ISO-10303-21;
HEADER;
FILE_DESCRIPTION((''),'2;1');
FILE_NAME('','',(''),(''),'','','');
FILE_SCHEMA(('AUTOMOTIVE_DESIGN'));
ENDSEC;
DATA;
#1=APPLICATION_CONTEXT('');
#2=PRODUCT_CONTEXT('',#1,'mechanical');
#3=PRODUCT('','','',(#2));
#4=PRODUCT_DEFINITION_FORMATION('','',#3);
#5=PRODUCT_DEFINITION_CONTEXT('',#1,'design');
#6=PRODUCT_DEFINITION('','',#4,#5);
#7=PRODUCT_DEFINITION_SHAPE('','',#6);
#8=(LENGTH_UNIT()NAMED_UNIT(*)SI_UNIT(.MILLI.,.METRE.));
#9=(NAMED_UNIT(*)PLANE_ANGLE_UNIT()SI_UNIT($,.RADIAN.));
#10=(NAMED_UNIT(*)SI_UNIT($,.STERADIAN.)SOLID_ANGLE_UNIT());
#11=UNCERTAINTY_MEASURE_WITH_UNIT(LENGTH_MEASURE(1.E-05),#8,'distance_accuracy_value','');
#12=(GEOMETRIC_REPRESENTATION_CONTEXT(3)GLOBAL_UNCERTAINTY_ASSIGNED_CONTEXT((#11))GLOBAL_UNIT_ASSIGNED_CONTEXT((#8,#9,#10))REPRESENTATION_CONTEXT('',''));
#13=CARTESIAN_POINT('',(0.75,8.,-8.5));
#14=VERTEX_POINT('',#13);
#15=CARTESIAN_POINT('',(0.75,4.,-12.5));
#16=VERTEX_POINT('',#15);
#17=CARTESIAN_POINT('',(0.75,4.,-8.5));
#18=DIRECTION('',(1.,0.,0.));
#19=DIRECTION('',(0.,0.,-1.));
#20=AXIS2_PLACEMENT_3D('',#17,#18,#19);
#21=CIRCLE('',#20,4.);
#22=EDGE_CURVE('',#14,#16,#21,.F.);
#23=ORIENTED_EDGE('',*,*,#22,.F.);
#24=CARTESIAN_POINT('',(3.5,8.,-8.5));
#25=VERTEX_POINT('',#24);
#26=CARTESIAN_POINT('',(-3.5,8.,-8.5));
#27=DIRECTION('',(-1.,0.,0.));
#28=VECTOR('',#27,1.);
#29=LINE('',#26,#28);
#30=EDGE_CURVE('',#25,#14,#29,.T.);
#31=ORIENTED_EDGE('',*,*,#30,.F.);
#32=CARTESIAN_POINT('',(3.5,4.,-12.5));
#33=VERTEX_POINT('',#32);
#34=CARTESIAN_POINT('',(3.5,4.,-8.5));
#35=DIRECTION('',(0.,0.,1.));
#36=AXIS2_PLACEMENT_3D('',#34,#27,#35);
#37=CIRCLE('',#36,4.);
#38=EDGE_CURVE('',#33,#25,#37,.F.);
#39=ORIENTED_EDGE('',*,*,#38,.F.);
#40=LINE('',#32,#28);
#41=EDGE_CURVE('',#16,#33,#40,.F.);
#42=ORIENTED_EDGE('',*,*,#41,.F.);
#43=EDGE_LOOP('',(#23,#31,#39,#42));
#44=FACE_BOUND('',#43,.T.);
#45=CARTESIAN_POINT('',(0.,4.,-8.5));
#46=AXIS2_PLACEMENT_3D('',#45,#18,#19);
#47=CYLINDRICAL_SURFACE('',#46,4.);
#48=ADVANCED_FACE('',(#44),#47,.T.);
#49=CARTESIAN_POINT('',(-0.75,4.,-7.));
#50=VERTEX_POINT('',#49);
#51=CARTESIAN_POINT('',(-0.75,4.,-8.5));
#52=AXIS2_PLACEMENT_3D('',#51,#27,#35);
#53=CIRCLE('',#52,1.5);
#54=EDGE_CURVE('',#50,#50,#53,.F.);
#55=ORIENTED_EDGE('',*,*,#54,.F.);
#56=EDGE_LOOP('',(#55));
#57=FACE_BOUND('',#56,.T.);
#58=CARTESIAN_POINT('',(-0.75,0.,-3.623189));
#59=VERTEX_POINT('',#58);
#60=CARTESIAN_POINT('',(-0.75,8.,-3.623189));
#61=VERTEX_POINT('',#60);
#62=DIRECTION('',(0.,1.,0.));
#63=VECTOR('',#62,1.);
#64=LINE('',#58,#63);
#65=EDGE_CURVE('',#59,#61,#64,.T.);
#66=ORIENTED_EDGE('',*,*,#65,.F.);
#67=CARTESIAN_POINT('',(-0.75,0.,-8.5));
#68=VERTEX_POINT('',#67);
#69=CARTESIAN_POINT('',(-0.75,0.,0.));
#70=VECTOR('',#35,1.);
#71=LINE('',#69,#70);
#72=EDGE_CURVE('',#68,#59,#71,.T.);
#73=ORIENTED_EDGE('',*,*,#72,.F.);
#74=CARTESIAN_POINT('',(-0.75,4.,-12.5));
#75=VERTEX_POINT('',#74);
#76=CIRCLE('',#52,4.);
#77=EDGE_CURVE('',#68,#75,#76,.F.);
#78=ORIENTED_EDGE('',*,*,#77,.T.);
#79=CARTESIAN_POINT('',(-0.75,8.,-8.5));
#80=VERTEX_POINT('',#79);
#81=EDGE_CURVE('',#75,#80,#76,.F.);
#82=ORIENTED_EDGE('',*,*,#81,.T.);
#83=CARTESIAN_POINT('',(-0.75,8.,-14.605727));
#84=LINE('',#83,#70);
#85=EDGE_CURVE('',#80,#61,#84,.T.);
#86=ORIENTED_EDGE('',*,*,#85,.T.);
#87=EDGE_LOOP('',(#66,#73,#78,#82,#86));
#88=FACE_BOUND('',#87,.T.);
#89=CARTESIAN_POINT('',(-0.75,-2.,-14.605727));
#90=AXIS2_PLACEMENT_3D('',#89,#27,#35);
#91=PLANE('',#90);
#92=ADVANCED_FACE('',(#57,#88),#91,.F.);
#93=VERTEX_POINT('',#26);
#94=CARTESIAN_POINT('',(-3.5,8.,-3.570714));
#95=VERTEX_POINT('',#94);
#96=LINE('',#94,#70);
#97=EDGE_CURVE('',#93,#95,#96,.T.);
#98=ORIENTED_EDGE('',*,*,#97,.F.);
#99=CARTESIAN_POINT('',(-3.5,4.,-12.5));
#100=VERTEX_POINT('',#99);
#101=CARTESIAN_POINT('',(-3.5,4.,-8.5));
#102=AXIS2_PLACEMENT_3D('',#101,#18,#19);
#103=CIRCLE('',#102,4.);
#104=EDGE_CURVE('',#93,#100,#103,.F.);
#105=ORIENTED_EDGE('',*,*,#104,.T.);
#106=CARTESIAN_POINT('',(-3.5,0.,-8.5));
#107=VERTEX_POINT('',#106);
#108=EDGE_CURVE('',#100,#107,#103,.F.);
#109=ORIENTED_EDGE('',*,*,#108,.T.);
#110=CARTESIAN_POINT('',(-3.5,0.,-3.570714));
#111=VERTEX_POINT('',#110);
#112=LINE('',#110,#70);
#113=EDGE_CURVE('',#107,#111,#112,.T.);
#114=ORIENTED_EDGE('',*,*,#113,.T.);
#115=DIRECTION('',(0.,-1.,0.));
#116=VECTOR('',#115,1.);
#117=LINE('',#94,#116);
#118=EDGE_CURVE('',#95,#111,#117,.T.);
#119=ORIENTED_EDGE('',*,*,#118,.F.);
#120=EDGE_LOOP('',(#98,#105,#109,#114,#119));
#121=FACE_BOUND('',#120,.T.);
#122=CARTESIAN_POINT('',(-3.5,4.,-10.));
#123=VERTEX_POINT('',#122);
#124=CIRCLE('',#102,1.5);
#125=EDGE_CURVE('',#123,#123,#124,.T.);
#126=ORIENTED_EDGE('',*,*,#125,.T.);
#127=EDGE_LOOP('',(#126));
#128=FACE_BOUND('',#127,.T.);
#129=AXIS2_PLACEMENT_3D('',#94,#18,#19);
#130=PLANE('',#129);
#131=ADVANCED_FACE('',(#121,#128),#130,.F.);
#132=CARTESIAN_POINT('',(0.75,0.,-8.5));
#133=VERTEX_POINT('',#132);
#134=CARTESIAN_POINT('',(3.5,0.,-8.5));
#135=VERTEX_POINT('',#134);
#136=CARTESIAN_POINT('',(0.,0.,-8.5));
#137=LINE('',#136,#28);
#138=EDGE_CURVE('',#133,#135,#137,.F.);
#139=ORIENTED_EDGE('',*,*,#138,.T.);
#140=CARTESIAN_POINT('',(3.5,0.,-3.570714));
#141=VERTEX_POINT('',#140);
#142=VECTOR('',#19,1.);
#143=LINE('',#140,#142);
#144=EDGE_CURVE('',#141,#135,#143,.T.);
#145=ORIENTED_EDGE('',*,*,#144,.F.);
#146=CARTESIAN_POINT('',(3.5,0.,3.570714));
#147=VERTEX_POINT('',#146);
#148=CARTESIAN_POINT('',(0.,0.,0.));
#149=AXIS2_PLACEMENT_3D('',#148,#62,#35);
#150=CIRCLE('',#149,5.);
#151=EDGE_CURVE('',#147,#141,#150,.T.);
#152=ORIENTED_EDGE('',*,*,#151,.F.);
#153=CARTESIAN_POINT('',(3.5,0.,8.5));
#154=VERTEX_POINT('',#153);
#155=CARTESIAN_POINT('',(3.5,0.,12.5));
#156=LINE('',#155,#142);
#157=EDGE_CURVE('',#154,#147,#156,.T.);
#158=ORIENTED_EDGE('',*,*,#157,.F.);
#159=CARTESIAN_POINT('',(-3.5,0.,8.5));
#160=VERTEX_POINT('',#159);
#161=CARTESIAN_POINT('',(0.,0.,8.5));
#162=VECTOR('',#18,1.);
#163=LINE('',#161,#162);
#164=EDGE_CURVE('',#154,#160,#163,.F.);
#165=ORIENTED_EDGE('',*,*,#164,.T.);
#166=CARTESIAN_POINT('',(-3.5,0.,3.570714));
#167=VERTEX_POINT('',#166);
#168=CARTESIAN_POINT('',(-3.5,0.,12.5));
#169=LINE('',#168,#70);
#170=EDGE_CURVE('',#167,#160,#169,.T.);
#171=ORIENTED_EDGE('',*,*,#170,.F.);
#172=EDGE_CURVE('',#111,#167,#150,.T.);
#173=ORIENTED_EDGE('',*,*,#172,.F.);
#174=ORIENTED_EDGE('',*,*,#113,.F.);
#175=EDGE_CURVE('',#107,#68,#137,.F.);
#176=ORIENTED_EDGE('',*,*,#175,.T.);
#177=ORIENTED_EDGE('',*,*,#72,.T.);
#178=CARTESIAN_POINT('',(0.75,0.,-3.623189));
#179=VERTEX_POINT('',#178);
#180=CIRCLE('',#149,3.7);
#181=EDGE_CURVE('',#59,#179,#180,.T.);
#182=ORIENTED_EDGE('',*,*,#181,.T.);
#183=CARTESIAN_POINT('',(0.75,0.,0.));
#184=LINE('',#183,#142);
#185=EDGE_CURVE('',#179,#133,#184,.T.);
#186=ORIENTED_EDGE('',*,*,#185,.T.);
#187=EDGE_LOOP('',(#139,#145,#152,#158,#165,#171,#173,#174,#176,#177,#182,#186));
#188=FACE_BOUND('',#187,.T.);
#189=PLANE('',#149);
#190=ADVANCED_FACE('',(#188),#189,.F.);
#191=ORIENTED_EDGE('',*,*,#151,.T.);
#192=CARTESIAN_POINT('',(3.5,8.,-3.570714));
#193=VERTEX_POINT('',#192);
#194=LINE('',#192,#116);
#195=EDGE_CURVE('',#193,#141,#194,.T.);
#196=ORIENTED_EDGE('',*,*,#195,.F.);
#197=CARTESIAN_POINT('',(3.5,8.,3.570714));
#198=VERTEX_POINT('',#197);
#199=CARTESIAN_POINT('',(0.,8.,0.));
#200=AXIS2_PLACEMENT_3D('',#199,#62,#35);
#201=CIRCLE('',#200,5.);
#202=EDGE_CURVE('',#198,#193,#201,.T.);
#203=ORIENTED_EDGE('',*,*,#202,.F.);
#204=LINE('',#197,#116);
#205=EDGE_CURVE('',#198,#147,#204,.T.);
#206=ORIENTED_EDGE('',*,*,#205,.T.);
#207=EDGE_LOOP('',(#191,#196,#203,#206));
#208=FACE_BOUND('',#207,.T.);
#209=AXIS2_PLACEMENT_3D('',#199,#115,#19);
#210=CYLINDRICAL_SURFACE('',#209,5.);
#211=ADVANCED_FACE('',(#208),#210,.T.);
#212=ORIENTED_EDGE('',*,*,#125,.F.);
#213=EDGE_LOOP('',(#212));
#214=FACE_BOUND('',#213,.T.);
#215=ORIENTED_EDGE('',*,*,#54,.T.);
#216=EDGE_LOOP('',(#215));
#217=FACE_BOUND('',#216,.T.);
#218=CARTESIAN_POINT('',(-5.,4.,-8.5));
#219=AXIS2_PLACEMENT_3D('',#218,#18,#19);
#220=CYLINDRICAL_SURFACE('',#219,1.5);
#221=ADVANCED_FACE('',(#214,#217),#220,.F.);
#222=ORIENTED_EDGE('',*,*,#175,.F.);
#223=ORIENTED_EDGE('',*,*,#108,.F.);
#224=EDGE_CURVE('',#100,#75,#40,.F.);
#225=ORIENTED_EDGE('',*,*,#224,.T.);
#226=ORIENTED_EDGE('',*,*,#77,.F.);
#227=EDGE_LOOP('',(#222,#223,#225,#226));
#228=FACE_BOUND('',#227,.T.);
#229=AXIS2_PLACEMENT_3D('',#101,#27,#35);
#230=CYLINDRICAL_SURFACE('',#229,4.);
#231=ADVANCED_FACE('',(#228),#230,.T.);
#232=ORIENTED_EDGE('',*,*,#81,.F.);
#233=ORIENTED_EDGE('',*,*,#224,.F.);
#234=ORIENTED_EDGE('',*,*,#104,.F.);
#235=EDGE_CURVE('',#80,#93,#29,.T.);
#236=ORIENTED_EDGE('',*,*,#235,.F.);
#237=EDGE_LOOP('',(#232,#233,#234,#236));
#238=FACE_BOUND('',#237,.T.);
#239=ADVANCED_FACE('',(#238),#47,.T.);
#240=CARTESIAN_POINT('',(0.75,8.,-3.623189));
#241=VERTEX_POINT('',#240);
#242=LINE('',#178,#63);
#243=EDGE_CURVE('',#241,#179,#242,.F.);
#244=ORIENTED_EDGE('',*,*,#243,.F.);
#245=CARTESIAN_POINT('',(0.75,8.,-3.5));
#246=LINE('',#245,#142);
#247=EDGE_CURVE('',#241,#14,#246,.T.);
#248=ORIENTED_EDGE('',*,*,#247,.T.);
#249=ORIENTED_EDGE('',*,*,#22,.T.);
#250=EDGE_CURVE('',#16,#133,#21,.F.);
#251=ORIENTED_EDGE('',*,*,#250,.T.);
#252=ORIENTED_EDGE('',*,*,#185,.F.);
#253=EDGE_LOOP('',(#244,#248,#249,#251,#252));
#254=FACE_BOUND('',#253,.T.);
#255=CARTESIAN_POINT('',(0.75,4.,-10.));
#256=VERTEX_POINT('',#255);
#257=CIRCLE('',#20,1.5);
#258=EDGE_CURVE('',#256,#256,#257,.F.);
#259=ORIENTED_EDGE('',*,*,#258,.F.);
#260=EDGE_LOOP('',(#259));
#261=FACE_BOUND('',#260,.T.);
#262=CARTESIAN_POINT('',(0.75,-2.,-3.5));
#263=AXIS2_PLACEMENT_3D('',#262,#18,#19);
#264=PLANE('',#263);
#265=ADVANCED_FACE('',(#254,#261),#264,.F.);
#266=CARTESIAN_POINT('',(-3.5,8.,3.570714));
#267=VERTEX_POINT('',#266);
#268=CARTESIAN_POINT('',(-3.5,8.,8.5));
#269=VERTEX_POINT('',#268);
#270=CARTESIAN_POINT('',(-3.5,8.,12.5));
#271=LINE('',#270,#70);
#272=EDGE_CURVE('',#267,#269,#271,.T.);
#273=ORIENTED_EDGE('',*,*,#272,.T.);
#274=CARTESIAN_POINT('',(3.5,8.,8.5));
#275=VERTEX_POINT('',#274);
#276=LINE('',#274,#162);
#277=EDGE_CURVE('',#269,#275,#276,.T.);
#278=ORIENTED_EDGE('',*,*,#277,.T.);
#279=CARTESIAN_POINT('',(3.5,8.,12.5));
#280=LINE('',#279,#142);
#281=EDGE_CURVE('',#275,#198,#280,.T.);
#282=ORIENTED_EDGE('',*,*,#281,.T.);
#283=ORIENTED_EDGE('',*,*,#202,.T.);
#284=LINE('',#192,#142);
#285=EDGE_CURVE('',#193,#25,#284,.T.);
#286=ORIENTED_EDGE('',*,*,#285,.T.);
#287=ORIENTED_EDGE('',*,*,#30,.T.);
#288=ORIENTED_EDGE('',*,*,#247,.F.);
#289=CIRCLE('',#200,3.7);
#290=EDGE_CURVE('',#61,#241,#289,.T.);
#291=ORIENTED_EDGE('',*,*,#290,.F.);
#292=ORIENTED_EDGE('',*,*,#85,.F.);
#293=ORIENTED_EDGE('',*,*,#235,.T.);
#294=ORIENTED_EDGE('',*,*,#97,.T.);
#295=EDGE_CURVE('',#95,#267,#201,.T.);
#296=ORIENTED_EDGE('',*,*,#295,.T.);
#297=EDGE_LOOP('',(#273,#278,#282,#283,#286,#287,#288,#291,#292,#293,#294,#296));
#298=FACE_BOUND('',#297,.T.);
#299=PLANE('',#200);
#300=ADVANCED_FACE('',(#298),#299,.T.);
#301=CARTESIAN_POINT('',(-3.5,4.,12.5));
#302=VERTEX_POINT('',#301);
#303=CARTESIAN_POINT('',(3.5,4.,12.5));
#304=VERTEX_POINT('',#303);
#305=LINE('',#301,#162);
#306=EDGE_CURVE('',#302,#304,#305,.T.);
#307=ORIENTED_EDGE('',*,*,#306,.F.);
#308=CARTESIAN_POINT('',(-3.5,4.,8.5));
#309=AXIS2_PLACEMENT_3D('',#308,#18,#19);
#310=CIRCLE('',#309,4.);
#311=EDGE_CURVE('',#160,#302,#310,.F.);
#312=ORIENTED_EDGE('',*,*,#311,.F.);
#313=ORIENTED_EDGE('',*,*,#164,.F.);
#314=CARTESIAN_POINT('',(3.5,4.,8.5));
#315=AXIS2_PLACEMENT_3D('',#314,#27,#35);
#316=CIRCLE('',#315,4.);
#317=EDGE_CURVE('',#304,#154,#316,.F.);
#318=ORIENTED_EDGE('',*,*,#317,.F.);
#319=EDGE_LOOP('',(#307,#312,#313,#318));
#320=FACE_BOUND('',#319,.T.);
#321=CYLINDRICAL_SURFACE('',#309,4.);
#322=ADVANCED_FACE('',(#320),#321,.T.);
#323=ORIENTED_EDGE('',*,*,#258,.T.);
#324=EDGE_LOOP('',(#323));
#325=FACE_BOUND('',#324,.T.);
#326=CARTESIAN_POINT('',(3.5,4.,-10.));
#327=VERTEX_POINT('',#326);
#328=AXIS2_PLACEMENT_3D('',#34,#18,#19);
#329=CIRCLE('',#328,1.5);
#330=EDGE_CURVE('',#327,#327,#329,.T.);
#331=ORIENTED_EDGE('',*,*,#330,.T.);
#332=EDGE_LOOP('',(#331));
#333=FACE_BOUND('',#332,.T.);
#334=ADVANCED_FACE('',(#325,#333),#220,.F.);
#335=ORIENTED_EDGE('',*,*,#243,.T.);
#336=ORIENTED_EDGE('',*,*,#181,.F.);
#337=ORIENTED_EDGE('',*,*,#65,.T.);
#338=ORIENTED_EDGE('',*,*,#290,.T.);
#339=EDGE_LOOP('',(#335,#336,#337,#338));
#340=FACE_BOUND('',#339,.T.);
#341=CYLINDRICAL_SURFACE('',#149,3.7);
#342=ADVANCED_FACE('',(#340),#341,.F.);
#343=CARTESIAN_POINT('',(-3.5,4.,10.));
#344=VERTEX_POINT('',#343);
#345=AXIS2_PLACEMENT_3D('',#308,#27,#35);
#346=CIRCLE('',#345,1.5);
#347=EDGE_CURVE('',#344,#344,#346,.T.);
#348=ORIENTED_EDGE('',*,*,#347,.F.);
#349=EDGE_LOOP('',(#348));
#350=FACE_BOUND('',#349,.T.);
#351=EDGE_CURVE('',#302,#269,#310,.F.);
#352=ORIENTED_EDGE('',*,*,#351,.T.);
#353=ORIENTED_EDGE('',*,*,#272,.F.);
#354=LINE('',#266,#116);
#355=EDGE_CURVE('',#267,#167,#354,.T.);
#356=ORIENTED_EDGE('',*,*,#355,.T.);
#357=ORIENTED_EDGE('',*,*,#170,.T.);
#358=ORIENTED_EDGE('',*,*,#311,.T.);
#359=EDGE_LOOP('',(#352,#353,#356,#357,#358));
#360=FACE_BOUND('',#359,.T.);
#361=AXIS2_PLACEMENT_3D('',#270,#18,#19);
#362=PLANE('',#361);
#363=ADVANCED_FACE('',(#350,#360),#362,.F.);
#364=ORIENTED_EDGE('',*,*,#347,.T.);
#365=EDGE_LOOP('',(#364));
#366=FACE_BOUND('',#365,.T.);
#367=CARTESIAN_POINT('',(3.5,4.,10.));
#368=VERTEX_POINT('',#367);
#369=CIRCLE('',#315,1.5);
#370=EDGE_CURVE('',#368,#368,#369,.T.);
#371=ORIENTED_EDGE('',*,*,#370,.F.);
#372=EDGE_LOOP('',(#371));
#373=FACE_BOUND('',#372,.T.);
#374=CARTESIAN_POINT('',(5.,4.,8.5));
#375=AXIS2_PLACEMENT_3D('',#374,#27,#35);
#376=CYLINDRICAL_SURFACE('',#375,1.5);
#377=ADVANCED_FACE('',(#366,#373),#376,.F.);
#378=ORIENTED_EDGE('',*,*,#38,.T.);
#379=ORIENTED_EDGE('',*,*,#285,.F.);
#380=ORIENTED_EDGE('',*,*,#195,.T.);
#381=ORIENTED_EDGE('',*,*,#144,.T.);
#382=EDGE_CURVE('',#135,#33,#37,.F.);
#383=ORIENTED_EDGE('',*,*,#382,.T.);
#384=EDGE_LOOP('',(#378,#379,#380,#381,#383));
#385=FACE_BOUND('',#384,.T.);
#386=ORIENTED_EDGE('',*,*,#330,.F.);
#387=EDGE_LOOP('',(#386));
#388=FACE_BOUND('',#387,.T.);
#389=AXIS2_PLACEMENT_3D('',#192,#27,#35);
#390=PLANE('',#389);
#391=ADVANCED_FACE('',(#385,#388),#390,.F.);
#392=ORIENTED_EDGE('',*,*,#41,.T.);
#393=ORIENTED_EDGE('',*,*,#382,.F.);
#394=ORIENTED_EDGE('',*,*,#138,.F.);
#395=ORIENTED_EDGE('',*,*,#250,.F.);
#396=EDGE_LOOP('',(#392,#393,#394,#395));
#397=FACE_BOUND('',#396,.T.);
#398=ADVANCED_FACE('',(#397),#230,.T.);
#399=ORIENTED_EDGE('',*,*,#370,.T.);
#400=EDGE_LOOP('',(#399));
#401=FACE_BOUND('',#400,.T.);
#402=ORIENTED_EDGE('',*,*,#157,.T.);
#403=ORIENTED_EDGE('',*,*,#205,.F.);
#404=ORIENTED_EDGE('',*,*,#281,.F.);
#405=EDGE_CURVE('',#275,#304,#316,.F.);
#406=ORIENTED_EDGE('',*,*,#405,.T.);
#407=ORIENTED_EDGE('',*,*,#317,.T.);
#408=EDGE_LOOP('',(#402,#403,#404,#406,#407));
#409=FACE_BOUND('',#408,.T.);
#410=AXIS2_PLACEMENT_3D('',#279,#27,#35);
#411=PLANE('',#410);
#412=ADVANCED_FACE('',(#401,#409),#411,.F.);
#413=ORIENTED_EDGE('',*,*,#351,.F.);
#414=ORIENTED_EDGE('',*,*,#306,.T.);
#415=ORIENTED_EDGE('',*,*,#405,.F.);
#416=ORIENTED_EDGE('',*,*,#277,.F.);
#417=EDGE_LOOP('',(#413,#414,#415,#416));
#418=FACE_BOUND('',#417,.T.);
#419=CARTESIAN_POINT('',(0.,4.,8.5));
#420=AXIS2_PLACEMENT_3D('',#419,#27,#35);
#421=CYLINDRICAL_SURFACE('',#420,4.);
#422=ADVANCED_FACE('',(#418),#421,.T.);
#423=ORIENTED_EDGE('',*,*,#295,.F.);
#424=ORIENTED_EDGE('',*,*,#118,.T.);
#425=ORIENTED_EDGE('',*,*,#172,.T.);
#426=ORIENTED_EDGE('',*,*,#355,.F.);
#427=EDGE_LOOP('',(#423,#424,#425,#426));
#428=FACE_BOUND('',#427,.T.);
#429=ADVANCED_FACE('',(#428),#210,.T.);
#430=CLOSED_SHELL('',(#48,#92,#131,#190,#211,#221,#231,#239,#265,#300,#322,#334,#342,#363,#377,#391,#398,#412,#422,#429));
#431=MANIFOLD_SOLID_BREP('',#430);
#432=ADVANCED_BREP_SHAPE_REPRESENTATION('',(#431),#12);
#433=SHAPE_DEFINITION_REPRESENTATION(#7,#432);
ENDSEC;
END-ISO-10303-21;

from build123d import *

# Parameters (mm, degrees)
EXTRUDE_2_DEPTH     = 8
FILLET_1_R          = 4
SKETCH_5_R          = 1.5
CUT_EXTRUDE_1_DEPTH = 18.102631376
SKETCH_3_R          = 3.7
CUT_EXTRUDE_2_DEPTH = 16.660459763
FILLET_3_R          = 4
SKETCH_6_R          = 1.5
CUT_EXTRUDE_3_DEPTH = 18.102631376
SKETCH_7_W          = 1.5
SKETCH_7_H          = 11.105726975
CUT_EXTRUDE_5_DEPTH = 10


with BuildPart() as part:
    # 草图1 → 凸台-拉伸2 (new body)
    with BuildSketch(Plane(origin=(0, 0, 0), x_dir=(1, 0, 0), z_dir=(0, 1, 0))):
        with BuildLine():
            Line((-3.5, 3.570714214), (-3.5, 12.5))
            Line((-3.5, 12.5), (3.5, 12.5))
            Line((3.5, 12.5), (3.5, 3.570714214))
            ThreePointArc((3.5, 3.570714214), (5, 0), (3.5, -3.570714214))
            Line((3.5, -3.570714214), (3.5, -12.5))
            Line((3.5, -12.5), (-3.5, -12.5))
            Line((-3.5, -12.5), (-3.5, -3.570714214))
            ThreePointArc((-3.5, -3.570714214), (-5, 0), (-3.5, 3.570714214))
        make_face()
    extrude(amount=EXTRUDE_2_DEPTH)

    # 圆角1
    fillet_1_edges = [part.edges().sort_by_distance(p)[0] for p in [
        (0, 0, -12.5),
        (0, 8, -12.5),
    ]]
    fillet(fillet_1_edges, radius=FILLET_1_R - 0.0001)  # a hair under: the kernel refuses the full size

    # 草图5 → 切除-拉伸1 (cut, through all)
    with BuildSketch(Plane(origin=(3.5, 0, 0), x_dir=(0, 0, -1), z_dir=(1, 0, 0))):
        with Locations((8.5, 4)):
            Circle(SKETCH_5_R)
    extrude(amount=-CUT_EXTRUDE_1_DEPTH, mode=Mode.SUBTRACT)

    # 草图3 → 切除-拉伸2 (cut, through all)
    with BuildSketch(Plane(origin=(0, 8, 0), x_dir=(1, 0, 0), z_dir=(0, 1, 0))):
        with Locations(Location((0, 0, 0), (0, 0, 270))):
            Circle(SKETCH_3_R)
    extrude(amount=-CUT_EXTRUDE_2_DEPTH, mode=Mode.SUBTRACT)

    # 圆角3
    fillet_3_edges = [part.edges().sort_by_distance(p)[0] for p in [
        (0, 8, 12.5),
        (0, 0, 12.5),
    ]]
    fillet(fillet_3_edges, radius=FILLET_3_R - 0.0001)  # a hair under: the kernel refuses the full size

    # 草图6 → 切除-拉伸3 (cut, through all)
    with BuildSketch(Plane.ZY.offset(3.5)):
        with Locations((8.5, 4)):
            Circle(SKETCH_6_R)
    extrude(amount=-CUT_EXTRUDE_3_DEPTH, mode=Mode.SUBTRACT)

    # 草图7 → 切除-拉伸5 (cut)
    with BuildSketch(Plane(origin=(0, 8, 0), x_dir=(1, 0, 0), z_dir=(0, 1, 0))):
        with Locations((0, 9.052863488)):
            Rectangle(SKETCH_7_W, SKETCH_7_H)
    extrude(amount=-CUT_EXTRUDE_5_DEPTH, mode=Mode.SUBTRACT)


solid = part.part
